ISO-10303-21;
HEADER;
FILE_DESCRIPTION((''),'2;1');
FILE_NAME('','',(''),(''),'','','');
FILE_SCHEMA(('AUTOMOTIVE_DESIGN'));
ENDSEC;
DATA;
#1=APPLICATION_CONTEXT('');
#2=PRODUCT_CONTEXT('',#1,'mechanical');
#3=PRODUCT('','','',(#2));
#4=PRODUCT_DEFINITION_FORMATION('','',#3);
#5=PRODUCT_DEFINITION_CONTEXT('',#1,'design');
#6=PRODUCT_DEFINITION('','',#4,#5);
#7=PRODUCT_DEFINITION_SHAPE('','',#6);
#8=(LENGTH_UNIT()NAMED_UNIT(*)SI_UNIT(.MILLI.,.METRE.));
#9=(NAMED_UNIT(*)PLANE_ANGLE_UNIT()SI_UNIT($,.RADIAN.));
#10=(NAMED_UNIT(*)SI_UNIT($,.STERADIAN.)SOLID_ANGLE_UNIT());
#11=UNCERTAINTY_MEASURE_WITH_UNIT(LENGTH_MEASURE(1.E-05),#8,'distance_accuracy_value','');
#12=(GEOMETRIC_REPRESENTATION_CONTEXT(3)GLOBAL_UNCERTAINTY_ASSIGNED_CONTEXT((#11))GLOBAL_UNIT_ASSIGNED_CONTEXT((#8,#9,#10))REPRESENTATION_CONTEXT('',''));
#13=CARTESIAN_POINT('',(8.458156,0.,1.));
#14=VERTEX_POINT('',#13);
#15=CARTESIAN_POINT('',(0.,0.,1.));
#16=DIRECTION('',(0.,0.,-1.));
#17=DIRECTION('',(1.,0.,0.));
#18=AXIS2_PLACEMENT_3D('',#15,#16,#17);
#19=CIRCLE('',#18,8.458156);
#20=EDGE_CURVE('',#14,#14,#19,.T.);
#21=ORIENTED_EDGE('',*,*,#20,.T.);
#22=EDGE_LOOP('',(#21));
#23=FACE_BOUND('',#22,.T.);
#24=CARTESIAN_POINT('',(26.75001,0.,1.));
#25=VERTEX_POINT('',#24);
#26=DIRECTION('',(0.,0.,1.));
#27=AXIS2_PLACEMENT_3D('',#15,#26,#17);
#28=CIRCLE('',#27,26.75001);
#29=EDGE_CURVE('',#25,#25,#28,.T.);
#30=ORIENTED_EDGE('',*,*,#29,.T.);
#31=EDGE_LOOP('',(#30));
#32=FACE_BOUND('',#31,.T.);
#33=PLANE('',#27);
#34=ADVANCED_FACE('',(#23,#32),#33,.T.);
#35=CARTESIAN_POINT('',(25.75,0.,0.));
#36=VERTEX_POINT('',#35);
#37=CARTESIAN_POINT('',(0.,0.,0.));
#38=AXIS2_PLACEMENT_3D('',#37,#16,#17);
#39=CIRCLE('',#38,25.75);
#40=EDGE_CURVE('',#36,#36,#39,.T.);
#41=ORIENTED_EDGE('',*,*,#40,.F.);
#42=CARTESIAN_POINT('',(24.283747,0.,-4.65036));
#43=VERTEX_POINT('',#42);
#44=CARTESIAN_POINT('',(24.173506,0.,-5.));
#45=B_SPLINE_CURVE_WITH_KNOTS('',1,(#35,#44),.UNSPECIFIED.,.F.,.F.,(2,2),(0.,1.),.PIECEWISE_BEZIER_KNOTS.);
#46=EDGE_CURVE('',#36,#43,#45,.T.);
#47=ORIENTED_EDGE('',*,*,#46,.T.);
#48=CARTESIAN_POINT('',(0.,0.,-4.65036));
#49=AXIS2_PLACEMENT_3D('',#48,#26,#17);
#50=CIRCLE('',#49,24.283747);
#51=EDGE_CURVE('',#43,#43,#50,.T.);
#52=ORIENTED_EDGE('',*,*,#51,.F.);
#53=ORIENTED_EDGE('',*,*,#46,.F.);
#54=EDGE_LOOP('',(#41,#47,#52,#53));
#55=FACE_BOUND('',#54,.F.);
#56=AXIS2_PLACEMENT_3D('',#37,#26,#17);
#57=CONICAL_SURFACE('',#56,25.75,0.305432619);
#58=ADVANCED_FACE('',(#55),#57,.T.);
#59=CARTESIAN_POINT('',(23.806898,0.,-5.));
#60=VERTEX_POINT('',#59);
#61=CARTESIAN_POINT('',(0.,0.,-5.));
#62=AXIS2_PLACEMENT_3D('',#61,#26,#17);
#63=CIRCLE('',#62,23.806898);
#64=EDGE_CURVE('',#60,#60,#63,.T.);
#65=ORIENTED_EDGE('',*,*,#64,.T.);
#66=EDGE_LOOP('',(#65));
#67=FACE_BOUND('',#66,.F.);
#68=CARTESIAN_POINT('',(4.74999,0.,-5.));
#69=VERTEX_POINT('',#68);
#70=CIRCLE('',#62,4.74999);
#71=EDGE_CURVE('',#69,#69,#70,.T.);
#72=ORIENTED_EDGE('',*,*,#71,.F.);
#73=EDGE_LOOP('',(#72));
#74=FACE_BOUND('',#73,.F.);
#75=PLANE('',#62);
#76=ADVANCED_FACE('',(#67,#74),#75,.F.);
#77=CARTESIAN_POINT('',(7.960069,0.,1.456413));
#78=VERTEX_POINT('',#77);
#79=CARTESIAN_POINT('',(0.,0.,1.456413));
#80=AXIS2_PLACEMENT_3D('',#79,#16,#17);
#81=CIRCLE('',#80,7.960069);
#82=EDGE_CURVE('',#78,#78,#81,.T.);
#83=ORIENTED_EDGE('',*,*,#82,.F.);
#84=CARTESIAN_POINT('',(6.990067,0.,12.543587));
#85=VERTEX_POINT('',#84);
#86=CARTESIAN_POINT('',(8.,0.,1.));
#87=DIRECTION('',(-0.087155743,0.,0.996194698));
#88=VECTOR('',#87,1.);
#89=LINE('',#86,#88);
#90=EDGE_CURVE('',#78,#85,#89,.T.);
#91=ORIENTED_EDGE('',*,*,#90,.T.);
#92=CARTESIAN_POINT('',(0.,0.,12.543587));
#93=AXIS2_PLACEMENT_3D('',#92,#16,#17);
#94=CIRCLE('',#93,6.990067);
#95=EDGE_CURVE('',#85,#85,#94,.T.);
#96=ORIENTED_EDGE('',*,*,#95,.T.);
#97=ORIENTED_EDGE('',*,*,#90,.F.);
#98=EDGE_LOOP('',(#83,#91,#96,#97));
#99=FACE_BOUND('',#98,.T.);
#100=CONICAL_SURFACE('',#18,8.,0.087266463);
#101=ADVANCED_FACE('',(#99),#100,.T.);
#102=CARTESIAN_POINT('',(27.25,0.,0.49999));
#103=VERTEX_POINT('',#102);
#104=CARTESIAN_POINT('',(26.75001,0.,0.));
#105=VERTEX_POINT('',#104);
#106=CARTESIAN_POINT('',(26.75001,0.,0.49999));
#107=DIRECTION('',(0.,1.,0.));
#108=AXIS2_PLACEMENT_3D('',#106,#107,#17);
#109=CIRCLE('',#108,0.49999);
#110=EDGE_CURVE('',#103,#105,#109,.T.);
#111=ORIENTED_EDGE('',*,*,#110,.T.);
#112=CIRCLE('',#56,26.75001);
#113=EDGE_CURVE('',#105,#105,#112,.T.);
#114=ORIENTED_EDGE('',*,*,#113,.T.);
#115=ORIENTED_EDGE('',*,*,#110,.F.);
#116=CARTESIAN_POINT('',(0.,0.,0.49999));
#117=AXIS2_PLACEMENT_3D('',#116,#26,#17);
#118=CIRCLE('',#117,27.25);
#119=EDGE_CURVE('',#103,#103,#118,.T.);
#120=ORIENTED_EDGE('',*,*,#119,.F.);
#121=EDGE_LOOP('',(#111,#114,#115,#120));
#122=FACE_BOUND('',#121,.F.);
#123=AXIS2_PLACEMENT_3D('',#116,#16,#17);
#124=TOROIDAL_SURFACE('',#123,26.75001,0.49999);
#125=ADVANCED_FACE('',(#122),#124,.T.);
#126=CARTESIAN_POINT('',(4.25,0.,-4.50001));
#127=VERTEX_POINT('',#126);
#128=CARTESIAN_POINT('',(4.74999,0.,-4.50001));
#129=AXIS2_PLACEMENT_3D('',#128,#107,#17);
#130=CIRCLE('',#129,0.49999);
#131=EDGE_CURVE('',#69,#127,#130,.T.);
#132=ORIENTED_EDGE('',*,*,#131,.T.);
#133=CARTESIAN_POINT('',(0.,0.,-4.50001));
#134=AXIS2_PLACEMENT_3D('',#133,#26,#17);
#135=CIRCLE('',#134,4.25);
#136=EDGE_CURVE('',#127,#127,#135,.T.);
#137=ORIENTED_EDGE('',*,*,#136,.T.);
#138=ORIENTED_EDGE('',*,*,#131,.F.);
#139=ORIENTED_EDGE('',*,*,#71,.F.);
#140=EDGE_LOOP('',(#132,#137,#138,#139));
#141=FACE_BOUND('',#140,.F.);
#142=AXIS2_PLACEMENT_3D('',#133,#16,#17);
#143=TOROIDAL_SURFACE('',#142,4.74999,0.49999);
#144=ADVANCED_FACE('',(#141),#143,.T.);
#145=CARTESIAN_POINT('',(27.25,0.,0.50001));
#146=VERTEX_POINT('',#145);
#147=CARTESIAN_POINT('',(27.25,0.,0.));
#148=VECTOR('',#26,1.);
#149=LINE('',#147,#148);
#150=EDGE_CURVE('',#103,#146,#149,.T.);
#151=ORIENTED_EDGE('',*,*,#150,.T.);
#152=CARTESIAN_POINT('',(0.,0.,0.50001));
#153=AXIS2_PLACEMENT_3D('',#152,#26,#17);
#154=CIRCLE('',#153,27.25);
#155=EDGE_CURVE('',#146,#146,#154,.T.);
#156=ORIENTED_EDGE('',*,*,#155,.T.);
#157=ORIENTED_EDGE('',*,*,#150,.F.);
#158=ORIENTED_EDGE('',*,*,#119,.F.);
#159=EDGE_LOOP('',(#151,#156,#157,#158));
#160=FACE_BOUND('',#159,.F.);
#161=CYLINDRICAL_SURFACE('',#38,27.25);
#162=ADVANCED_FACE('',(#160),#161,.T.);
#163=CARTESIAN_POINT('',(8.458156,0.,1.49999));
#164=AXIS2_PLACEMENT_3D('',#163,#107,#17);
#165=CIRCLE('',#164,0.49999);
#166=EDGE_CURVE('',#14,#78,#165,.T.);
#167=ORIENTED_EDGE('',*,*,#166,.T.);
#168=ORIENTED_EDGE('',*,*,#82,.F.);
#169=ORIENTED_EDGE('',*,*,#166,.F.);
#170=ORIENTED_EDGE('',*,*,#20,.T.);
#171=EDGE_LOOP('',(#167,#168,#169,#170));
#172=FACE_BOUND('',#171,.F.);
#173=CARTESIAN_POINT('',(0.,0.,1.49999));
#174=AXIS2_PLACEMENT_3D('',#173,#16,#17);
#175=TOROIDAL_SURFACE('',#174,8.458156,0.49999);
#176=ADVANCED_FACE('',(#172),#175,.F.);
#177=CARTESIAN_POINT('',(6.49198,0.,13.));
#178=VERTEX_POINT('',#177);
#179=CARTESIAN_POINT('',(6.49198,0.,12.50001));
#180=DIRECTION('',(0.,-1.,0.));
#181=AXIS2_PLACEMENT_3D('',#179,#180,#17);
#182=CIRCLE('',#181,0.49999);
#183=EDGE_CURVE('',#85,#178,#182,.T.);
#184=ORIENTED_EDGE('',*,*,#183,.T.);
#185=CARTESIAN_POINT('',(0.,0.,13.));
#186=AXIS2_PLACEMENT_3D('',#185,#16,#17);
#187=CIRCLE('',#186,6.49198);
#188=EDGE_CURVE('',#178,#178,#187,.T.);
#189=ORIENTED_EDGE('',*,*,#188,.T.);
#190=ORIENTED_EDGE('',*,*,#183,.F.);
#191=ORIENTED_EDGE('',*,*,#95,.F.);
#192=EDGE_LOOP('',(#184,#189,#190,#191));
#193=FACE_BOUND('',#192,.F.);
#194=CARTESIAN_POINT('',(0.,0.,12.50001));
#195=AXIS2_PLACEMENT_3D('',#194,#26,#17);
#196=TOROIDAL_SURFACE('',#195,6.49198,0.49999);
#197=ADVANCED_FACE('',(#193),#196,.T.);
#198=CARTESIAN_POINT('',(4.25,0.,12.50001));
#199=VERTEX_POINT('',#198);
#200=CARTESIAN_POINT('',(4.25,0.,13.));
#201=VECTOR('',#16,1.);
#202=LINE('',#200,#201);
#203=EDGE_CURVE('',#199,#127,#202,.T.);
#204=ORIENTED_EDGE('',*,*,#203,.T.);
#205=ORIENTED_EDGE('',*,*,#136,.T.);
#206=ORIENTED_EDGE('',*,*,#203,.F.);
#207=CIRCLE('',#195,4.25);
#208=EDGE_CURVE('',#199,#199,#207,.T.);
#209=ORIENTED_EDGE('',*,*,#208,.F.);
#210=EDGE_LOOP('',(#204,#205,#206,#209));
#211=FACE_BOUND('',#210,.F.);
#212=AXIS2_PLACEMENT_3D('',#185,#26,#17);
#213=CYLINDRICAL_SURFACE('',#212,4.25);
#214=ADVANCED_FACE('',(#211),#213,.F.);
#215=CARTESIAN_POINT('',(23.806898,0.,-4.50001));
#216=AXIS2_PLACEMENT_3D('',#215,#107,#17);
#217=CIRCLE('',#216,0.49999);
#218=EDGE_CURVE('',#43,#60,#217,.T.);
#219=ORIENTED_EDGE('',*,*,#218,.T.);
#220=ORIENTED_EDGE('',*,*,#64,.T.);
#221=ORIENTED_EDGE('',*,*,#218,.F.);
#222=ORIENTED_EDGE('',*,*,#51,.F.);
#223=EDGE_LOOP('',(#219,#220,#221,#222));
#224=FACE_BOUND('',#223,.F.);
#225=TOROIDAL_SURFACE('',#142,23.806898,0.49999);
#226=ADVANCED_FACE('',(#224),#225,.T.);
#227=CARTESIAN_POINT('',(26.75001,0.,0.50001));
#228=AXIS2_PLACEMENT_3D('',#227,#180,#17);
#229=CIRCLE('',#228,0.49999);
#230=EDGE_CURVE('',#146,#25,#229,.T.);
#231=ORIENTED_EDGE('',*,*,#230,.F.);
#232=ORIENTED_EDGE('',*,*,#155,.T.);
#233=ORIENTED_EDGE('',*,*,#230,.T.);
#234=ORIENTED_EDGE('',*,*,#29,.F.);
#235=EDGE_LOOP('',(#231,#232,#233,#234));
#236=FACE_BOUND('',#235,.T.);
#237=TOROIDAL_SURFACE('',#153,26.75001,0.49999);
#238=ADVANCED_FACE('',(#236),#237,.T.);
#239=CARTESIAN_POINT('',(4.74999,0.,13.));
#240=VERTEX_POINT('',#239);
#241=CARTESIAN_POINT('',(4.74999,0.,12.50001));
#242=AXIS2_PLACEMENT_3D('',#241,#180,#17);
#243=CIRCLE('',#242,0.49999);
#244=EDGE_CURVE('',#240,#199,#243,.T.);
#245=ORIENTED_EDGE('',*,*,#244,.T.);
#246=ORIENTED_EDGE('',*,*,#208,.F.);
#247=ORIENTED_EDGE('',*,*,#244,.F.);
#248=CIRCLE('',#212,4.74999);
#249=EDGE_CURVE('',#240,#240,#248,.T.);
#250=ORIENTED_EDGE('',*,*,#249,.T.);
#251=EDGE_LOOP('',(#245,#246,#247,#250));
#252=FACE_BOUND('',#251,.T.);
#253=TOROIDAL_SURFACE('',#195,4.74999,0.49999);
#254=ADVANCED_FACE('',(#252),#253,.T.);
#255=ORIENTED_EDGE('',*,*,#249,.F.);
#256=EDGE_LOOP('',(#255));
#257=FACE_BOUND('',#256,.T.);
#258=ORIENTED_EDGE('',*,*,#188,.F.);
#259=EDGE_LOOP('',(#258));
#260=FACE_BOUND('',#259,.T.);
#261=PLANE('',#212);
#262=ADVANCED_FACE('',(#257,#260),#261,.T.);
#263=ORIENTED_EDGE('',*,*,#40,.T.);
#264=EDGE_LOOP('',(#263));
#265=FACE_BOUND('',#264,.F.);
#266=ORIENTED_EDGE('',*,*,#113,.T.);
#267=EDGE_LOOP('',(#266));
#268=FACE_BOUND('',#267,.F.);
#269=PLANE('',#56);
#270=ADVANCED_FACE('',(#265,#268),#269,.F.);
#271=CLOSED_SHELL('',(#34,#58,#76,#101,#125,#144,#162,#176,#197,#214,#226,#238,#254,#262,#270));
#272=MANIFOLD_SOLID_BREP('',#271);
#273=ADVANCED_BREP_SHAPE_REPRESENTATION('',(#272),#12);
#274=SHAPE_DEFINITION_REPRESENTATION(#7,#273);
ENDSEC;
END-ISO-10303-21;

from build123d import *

# Parameters (mm, degrees)
F0_R     = 27.25
F0_R_2   = 25.75
F0_R_3   = 24.25
F1_DEPTH = 1
F2_DEPTH = 5
F2_TAPER = 17.5
F3_R     = 8
F4_DEPTH = 12
F4_TAPER = 5
F5_R     = 4.25
F6_DEPTH = 18
F7_R     = 0.49999


# Not quite as in the source:
# - a fillet or chamfer is up to 0.001 mm smaller than in the source, because OpenCascade refuses the exact size


with BuildPart() as f1:
    # F0 (on Top) → F1 (new body)
    with BuildSketch(Plane.XY):
        Circle(F0_R)
        Circle(F0_R_2, mode=Mode.SUBTRACT)
        Circle(F0_R_2)
        Circle(F0_R_3, mode=Mode.SUBTRACT)
        Circle(F0_R_3)
    extrude(amount=F1_DEPTH)

    # F0 (on Top) → F2 (join)
    with BuildSketch(Plane.XY):
        Circle(F0_R_2)
        Circle(F0_R_3, mode=Mode.SUBTRACT)
        Circle(F0_R_3)
    extrude(amount=-F2_DEPTH, taper=F2_TAPER)

    # F3 (on face) → F4 (join)
    with BuildSketch(Plane.XY.offset(1)):
        Circle(F3_R)
    extrude(amount=F4_DEPTH, taper=F4_TAPER)

    # F5 (on face) → F6 (cut, through all)
    with BuildSketch(Plane.XY.offset(13)):
        Circle(F5_R)
    extrude(amount=-F6_DEPTH, mode=Mode.SUBTRACT)

    # F7 (radius 0.5 in the source; OpenCascade refuses exactly that, so slightly less here)
    f7_edges = [f1.edges().sort_by_distance(p)[0] for p in [
        (-24.173506, 0, -5),
        (-27.25, 0, 0),
        (-27.25, 0, 1),
        (-4.25, 0, -5),
        (-8, 0, 1),
        (-6.950136, 0, 13),
        (-4.25, 0, 13),
    ]]
    fillet(f7_edges, radius=F7_R)


solid = f1.part
